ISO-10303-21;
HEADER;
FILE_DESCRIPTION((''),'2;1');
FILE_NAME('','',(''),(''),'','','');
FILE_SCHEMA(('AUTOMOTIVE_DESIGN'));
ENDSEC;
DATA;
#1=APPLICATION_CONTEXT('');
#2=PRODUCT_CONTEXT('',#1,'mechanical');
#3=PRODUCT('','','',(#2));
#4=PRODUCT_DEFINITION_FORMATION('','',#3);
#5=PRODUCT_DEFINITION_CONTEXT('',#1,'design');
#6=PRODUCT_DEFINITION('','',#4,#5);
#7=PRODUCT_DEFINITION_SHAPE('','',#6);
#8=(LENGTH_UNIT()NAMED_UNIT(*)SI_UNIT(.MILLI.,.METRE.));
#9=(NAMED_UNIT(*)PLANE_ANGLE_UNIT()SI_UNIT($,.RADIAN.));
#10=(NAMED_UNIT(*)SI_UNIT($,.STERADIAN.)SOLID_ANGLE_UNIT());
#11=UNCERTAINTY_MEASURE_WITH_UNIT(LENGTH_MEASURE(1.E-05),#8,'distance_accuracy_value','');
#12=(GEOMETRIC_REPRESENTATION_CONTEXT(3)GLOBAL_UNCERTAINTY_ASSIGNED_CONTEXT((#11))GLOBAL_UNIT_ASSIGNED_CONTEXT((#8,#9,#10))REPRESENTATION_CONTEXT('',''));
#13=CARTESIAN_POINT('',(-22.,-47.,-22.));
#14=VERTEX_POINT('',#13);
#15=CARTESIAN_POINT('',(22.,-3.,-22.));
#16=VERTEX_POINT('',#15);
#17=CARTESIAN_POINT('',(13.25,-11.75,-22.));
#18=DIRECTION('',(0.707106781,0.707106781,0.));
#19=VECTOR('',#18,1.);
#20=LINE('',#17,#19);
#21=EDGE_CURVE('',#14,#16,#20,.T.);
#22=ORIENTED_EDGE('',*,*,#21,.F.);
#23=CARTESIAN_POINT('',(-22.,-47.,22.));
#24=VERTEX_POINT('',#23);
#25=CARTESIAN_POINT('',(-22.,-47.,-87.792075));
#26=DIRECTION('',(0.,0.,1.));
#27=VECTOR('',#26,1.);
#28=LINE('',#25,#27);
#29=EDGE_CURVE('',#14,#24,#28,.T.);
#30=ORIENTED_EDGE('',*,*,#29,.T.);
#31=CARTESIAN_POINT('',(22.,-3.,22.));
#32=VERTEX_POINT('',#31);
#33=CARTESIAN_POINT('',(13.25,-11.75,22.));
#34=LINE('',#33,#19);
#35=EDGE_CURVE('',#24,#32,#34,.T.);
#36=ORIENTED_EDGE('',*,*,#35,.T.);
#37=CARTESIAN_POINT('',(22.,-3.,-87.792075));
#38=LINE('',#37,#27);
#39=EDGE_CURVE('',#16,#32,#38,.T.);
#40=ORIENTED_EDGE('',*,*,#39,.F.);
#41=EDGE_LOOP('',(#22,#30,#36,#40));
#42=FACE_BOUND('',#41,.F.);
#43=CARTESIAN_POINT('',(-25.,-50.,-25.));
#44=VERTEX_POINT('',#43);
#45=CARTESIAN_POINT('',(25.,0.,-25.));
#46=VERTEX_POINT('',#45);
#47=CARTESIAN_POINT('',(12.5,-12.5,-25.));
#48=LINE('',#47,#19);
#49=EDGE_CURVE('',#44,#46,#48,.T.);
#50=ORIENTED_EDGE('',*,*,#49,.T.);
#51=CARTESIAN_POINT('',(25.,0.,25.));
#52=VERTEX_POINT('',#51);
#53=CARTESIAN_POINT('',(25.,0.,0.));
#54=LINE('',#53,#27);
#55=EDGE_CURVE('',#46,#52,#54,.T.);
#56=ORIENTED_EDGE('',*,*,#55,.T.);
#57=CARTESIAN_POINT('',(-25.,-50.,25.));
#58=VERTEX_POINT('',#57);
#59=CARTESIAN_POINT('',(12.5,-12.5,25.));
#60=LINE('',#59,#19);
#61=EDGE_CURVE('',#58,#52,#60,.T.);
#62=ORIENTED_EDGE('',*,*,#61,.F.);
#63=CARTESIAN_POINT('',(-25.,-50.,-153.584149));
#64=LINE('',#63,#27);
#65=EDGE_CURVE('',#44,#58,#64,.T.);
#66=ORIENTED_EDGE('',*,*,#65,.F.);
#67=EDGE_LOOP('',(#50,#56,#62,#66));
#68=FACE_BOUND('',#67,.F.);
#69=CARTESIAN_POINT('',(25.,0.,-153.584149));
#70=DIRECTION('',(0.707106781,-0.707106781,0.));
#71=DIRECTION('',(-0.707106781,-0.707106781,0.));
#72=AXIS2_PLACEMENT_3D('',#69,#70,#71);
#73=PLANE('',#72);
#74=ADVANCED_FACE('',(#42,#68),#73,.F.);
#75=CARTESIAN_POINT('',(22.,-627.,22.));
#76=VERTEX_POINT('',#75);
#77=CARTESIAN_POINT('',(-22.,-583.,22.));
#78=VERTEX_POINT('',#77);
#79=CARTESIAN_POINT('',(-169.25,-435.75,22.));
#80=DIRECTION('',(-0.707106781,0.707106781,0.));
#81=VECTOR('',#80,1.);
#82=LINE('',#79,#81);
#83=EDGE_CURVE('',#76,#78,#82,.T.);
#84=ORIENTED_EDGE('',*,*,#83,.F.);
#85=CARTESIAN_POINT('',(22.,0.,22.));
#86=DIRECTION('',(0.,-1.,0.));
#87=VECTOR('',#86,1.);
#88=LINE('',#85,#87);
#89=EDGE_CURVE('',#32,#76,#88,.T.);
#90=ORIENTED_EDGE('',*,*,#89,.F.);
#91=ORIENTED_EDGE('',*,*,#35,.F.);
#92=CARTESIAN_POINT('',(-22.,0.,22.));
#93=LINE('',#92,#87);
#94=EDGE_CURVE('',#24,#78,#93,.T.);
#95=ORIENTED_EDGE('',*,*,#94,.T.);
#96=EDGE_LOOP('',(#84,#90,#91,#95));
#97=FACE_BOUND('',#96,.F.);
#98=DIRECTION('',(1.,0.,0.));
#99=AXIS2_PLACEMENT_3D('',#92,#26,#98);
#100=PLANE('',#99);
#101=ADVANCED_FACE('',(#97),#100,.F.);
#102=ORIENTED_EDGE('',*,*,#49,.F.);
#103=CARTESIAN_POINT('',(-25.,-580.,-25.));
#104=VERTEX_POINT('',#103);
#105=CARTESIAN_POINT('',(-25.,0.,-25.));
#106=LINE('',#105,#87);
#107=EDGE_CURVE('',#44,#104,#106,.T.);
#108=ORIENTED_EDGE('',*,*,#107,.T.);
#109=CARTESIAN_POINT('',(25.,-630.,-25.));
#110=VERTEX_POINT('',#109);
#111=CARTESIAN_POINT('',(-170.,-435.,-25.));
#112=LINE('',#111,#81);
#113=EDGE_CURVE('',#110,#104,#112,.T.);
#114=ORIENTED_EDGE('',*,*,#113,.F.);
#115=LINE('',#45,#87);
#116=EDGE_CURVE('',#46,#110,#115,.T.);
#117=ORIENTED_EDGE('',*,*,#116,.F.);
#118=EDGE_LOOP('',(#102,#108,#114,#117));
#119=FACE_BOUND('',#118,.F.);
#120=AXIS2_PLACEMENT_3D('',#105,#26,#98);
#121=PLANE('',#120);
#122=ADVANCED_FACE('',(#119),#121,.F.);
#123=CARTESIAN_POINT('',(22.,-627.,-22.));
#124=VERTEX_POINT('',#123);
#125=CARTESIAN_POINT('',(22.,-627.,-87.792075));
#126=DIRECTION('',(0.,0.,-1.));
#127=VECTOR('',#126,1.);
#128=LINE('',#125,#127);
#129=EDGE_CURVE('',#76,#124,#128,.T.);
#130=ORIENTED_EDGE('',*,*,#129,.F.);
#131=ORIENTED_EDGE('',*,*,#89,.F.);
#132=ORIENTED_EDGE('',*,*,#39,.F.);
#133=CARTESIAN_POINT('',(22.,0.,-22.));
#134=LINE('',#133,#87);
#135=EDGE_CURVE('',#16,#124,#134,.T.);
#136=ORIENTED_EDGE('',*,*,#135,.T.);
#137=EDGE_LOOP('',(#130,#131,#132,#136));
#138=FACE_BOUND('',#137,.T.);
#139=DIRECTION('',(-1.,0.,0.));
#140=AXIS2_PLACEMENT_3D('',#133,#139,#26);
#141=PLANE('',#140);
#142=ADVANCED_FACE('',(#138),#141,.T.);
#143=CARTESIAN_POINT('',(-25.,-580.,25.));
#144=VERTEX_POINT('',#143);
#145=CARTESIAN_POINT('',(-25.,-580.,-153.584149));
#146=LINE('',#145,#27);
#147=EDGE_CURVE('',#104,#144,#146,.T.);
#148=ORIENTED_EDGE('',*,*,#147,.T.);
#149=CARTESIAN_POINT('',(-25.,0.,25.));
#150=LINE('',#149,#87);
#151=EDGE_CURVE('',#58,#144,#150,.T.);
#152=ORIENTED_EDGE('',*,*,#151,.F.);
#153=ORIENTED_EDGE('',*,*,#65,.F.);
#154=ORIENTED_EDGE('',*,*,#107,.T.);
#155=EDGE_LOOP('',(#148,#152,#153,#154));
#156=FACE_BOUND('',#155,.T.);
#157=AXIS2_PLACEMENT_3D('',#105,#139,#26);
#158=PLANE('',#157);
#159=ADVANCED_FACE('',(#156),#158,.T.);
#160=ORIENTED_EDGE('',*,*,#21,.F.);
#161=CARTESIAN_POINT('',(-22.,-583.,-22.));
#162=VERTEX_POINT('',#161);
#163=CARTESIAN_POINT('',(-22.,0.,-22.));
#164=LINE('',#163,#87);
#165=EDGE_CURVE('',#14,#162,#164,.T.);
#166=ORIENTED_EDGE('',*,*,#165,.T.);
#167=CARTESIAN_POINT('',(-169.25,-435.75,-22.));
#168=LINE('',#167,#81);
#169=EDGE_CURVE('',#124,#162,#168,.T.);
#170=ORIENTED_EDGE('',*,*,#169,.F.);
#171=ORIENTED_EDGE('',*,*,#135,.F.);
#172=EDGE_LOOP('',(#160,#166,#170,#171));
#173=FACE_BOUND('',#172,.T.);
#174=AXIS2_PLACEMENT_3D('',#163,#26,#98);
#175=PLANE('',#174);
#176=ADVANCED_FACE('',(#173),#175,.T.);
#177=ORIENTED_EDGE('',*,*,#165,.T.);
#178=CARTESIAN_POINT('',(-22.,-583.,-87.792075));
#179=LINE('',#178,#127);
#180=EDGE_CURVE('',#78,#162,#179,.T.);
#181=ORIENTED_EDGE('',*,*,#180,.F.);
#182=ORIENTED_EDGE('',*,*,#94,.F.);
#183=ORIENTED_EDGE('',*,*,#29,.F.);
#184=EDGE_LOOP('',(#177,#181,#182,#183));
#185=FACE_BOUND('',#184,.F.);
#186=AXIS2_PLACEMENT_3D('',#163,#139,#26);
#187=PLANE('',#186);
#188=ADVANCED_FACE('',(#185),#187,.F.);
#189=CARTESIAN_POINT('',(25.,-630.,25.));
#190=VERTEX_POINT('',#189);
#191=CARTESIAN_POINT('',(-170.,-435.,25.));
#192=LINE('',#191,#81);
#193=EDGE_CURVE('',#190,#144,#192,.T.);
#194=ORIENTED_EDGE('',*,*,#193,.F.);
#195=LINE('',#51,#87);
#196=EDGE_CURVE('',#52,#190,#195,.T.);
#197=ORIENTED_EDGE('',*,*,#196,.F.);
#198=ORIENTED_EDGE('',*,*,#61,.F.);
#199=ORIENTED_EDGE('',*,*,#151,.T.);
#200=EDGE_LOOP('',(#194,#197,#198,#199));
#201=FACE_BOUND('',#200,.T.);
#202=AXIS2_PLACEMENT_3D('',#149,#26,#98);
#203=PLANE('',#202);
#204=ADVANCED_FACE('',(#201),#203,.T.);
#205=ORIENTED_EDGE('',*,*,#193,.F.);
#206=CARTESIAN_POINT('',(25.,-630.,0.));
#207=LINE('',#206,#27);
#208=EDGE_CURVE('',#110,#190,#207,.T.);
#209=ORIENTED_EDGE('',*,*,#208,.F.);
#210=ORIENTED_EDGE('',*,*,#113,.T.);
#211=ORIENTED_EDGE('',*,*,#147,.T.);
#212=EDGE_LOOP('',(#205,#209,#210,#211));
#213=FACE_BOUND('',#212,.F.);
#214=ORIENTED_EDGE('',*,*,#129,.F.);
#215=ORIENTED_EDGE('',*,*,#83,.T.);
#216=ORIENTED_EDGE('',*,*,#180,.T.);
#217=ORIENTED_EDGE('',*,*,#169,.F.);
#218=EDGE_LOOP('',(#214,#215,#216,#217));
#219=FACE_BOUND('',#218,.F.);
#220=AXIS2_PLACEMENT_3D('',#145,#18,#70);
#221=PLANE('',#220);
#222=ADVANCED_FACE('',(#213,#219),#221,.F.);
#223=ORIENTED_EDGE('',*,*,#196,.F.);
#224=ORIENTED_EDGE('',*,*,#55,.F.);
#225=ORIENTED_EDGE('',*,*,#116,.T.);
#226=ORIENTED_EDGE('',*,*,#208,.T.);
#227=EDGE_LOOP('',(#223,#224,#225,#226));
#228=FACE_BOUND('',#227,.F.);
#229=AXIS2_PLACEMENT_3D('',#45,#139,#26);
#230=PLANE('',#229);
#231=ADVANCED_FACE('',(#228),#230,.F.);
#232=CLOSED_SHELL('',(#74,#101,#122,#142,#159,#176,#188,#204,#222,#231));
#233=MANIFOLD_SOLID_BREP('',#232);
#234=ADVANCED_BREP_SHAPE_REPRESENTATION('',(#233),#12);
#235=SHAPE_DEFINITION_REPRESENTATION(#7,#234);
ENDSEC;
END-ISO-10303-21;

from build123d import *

# Parameters (mm, degrees)
F0_W        = 50
F0_H        = 50
F0_W_2      = 44
F0_H_2      = 44
F1_DEPTH    = 630
F2_T1_DEPTH = 307.1682987966
F3_T1_DEPTH = 307.1682987966


# Not quite as in the source:
# - a fillet or chamfer that OpenCascade refuses, or shapes differently, is made with other operations: its cross-section is extruded or revolved along the edge and cut away or added


with BuildPart() as f1:
    # F0 (on Front) → F1 (new body)
    with BuildSketch(Plane.XZ):
        Rectangle(F0_W, F0_H)
        Rectangle(F0_W_2, F0_H_2, mode=Mode.SUBTRACT)
    extrude(amount=F1_DEPTH)

    # F2: chamfer of 50 on 1 edges, made by hand

    # F2_s2 → F2_t1 (cut)
    with BuildSketch(Plane.XY.offset(-153.5841493983)):
        Polygon((-25, -580), (25, -630), (-25, -630), align=None)
    extrude(amount=F2_T1_DEPTH, mode=Mode.SUBTRACT)

    # F3: chamfer of 50 on 1 edges, made by hand

    # F3_s2 → F3_t1 (cut)
    with BuildSketch(Plane.XY.offset(-153.5841493983)):
        Polygon((25, 0), (-25, -50), (-25, 0), align=None)
    extrude(amount=F3_T1_DEPTH, mode=Mode.SUBTRACT)


solid = f1.part
